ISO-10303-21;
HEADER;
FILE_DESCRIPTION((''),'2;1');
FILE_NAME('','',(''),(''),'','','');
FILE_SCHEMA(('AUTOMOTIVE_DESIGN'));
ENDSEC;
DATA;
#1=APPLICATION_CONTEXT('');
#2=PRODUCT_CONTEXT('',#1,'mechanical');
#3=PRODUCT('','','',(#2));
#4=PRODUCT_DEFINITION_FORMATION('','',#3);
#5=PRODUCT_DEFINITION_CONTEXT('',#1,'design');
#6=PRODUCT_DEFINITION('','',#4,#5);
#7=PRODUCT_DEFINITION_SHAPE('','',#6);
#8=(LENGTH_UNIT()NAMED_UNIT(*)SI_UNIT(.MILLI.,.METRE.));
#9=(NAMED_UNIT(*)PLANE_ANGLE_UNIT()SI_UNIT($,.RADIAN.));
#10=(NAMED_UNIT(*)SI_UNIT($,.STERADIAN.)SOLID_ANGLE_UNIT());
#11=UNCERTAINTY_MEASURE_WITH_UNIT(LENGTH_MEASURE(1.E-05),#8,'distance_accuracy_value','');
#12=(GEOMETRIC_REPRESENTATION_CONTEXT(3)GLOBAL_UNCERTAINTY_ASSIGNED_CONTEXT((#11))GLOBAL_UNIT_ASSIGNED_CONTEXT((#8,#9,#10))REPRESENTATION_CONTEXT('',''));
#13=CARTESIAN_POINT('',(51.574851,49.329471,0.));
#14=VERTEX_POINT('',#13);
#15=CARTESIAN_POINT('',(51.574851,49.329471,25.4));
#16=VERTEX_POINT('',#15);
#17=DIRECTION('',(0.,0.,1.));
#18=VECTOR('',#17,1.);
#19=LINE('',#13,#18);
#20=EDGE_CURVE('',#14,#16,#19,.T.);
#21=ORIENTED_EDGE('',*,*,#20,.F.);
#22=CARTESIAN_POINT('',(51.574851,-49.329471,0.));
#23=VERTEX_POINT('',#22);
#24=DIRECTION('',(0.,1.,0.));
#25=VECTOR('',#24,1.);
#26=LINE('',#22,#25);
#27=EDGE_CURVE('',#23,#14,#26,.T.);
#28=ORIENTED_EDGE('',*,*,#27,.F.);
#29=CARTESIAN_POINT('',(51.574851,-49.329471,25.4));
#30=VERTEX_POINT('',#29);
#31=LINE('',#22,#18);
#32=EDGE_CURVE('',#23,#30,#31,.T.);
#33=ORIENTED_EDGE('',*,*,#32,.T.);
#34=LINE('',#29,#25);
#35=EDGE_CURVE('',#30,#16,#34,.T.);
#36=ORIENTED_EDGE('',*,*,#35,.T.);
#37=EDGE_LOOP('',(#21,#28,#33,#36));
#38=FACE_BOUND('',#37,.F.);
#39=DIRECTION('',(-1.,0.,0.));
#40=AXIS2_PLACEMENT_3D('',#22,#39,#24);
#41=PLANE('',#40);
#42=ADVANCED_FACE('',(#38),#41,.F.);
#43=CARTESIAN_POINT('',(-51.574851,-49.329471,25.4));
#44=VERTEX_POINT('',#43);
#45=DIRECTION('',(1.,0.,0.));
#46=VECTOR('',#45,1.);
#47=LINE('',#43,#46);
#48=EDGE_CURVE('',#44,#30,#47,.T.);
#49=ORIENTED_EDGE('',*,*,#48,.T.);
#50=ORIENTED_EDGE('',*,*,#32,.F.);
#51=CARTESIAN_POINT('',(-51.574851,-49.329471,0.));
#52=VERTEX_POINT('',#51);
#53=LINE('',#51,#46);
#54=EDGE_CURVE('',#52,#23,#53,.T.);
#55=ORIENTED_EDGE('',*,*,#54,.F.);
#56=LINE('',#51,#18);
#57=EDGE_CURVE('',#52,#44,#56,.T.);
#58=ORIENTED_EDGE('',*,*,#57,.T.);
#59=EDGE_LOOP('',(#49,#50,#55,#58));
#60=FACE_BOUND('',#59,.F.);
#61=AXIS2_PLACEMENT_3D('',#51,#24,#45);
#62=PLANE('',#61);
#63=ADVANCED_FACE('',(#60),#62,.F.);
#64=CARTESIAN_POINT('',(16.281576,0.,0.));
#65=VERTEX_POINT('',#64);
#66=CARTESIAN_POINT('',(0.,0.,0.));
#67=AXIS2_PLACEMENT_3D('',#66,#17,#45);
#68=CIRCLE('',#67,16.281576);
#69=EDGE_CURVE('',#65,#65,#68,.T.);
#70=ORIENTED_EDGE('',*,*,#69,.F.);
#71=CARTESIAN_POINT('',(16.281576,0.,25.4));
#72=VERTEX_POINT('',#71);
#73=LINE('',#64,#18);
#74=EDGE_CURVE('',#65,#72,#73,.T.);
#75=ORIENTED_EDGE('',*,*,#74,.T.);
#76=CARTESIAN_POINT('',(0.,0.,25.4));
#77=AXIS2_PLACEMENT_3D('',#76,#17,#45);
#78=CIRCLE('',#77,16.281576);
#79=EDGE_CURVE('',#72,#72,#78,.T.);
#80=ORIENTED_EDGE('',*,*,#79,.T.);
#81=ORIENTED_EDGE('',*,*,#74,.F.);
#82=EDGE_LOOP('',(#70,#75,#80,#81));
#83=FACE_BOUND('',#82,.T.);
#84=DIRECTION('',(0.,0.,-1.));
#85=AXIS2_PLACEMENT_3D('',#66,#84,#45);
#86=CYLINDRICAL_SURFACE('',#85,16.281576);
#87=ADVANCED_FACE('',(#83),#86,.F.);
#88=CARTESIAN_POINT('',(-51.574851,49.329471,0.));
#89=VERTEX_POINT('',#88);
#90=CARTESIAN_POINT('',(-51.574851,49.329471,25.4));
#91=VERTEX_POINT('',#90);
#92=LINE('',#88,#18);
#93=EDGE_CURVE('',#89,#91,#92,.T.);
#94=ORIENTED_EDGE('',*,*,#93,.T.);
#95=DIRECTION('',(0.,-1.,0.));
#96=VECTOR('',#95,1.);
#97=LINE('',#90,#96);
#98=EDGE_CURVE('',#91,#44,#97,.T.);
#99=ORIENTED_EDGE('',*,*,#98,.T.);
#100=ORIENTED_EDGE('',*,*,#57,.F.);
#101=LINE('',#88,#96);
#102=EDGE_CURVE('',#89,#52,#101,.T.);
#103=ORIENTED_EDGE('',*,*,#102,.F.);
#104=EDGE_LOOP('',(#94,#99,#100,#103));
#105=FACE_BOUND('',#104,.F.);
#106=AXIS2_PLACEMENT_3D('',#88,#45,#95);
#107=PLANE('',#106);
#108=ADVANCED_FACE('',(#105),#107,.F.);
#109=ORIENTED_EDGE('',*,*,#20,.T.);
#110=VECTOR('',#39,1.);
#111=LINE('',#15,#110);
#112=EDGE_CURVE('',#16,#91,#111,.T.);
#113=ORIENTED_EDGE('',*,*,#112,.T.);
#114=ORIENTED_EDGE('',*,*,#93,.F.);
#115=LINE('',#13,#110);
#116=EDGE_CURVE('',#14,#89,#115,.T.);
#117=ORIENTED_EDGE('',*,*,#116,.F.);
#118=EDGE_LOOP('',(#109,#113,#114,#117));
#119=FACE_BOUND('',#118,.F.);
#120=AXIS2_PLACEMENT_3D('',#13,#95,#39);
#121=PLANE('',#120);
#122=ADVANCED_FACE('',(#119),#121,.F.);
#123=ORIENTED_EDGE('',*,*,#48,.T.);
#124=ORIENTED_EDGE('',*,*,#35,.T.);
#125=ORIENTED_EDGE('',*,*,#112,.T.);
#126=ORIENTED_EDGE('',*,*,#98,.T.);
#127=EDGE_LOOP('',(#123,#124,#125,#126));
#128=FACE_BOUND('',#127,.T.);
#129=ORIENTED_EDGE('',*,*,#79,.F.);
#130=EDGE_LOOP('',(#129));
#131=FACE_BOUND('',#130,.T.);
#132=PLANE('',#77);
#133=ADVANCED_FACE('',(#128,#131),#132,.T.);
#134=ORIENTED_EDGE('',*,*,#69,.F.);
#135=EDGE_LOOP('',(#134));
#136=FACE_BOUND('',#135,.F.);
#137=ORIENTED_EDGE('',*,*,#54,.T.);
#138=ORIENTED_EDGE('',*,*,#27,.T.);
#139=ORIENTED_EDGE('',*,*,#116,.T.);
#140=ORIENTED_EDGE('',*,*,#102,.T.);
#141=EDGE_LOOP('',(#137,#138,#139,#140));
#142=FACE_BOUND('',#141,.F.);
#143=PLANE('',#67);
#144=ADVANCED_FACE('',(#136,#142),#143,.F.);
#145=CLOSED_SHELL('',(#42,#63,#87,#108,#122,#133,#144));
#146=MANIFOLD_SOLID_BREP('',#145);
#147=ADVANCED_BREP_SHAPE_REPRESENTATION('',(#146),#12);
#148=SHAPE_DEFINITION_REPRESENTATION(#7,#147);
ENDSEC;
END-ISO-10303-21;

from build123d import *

# Parameters (mm, degrees)
F0_R     = 16.2815755653
F1_DEPTH = 25.4
F3_DEPTH = 25.4


# Not quite as in the source:
# - the program builds the solid bodies; features that only make, move or delete a surface that nothing else refers to are left out


with BuildPart() as f1:
    # F0 (on Top) → F1 (new body)
    with BuildSketch(Plane.XY):
        Polygon((-32.1844741702, 49.3294708431), (-51.5748507939, 49.3294708431), (-51.5748507939, -49.3294708431), (51.5748507939, -49.3294708431), (51.5748507939, 49.3294708431), (-11.7852937953, 49.3294708431), align=None)
        Circle(F0_R, mode=Mode.SUBTRACT)
    extrude(amount=F1_DEPTH)

    # F0 (on Top) → F3 (join)
    with BuildSketch(Plane.XY):
        Polygon((-32.1844741702, 49.3294708431), (-51.5748507939, 49.3294708431), (-51.5748507939, -49.3294708431), (51.5748507939, -49.3294708431), (51.5748507939, 49.3294708431), (-11.7852937953, 49.3294708431), align=None)
        Circle(F0_R, mode=Mode.SUBTRACT)
    extrude(amount=F3_DEPTH)


solid = f1.part
